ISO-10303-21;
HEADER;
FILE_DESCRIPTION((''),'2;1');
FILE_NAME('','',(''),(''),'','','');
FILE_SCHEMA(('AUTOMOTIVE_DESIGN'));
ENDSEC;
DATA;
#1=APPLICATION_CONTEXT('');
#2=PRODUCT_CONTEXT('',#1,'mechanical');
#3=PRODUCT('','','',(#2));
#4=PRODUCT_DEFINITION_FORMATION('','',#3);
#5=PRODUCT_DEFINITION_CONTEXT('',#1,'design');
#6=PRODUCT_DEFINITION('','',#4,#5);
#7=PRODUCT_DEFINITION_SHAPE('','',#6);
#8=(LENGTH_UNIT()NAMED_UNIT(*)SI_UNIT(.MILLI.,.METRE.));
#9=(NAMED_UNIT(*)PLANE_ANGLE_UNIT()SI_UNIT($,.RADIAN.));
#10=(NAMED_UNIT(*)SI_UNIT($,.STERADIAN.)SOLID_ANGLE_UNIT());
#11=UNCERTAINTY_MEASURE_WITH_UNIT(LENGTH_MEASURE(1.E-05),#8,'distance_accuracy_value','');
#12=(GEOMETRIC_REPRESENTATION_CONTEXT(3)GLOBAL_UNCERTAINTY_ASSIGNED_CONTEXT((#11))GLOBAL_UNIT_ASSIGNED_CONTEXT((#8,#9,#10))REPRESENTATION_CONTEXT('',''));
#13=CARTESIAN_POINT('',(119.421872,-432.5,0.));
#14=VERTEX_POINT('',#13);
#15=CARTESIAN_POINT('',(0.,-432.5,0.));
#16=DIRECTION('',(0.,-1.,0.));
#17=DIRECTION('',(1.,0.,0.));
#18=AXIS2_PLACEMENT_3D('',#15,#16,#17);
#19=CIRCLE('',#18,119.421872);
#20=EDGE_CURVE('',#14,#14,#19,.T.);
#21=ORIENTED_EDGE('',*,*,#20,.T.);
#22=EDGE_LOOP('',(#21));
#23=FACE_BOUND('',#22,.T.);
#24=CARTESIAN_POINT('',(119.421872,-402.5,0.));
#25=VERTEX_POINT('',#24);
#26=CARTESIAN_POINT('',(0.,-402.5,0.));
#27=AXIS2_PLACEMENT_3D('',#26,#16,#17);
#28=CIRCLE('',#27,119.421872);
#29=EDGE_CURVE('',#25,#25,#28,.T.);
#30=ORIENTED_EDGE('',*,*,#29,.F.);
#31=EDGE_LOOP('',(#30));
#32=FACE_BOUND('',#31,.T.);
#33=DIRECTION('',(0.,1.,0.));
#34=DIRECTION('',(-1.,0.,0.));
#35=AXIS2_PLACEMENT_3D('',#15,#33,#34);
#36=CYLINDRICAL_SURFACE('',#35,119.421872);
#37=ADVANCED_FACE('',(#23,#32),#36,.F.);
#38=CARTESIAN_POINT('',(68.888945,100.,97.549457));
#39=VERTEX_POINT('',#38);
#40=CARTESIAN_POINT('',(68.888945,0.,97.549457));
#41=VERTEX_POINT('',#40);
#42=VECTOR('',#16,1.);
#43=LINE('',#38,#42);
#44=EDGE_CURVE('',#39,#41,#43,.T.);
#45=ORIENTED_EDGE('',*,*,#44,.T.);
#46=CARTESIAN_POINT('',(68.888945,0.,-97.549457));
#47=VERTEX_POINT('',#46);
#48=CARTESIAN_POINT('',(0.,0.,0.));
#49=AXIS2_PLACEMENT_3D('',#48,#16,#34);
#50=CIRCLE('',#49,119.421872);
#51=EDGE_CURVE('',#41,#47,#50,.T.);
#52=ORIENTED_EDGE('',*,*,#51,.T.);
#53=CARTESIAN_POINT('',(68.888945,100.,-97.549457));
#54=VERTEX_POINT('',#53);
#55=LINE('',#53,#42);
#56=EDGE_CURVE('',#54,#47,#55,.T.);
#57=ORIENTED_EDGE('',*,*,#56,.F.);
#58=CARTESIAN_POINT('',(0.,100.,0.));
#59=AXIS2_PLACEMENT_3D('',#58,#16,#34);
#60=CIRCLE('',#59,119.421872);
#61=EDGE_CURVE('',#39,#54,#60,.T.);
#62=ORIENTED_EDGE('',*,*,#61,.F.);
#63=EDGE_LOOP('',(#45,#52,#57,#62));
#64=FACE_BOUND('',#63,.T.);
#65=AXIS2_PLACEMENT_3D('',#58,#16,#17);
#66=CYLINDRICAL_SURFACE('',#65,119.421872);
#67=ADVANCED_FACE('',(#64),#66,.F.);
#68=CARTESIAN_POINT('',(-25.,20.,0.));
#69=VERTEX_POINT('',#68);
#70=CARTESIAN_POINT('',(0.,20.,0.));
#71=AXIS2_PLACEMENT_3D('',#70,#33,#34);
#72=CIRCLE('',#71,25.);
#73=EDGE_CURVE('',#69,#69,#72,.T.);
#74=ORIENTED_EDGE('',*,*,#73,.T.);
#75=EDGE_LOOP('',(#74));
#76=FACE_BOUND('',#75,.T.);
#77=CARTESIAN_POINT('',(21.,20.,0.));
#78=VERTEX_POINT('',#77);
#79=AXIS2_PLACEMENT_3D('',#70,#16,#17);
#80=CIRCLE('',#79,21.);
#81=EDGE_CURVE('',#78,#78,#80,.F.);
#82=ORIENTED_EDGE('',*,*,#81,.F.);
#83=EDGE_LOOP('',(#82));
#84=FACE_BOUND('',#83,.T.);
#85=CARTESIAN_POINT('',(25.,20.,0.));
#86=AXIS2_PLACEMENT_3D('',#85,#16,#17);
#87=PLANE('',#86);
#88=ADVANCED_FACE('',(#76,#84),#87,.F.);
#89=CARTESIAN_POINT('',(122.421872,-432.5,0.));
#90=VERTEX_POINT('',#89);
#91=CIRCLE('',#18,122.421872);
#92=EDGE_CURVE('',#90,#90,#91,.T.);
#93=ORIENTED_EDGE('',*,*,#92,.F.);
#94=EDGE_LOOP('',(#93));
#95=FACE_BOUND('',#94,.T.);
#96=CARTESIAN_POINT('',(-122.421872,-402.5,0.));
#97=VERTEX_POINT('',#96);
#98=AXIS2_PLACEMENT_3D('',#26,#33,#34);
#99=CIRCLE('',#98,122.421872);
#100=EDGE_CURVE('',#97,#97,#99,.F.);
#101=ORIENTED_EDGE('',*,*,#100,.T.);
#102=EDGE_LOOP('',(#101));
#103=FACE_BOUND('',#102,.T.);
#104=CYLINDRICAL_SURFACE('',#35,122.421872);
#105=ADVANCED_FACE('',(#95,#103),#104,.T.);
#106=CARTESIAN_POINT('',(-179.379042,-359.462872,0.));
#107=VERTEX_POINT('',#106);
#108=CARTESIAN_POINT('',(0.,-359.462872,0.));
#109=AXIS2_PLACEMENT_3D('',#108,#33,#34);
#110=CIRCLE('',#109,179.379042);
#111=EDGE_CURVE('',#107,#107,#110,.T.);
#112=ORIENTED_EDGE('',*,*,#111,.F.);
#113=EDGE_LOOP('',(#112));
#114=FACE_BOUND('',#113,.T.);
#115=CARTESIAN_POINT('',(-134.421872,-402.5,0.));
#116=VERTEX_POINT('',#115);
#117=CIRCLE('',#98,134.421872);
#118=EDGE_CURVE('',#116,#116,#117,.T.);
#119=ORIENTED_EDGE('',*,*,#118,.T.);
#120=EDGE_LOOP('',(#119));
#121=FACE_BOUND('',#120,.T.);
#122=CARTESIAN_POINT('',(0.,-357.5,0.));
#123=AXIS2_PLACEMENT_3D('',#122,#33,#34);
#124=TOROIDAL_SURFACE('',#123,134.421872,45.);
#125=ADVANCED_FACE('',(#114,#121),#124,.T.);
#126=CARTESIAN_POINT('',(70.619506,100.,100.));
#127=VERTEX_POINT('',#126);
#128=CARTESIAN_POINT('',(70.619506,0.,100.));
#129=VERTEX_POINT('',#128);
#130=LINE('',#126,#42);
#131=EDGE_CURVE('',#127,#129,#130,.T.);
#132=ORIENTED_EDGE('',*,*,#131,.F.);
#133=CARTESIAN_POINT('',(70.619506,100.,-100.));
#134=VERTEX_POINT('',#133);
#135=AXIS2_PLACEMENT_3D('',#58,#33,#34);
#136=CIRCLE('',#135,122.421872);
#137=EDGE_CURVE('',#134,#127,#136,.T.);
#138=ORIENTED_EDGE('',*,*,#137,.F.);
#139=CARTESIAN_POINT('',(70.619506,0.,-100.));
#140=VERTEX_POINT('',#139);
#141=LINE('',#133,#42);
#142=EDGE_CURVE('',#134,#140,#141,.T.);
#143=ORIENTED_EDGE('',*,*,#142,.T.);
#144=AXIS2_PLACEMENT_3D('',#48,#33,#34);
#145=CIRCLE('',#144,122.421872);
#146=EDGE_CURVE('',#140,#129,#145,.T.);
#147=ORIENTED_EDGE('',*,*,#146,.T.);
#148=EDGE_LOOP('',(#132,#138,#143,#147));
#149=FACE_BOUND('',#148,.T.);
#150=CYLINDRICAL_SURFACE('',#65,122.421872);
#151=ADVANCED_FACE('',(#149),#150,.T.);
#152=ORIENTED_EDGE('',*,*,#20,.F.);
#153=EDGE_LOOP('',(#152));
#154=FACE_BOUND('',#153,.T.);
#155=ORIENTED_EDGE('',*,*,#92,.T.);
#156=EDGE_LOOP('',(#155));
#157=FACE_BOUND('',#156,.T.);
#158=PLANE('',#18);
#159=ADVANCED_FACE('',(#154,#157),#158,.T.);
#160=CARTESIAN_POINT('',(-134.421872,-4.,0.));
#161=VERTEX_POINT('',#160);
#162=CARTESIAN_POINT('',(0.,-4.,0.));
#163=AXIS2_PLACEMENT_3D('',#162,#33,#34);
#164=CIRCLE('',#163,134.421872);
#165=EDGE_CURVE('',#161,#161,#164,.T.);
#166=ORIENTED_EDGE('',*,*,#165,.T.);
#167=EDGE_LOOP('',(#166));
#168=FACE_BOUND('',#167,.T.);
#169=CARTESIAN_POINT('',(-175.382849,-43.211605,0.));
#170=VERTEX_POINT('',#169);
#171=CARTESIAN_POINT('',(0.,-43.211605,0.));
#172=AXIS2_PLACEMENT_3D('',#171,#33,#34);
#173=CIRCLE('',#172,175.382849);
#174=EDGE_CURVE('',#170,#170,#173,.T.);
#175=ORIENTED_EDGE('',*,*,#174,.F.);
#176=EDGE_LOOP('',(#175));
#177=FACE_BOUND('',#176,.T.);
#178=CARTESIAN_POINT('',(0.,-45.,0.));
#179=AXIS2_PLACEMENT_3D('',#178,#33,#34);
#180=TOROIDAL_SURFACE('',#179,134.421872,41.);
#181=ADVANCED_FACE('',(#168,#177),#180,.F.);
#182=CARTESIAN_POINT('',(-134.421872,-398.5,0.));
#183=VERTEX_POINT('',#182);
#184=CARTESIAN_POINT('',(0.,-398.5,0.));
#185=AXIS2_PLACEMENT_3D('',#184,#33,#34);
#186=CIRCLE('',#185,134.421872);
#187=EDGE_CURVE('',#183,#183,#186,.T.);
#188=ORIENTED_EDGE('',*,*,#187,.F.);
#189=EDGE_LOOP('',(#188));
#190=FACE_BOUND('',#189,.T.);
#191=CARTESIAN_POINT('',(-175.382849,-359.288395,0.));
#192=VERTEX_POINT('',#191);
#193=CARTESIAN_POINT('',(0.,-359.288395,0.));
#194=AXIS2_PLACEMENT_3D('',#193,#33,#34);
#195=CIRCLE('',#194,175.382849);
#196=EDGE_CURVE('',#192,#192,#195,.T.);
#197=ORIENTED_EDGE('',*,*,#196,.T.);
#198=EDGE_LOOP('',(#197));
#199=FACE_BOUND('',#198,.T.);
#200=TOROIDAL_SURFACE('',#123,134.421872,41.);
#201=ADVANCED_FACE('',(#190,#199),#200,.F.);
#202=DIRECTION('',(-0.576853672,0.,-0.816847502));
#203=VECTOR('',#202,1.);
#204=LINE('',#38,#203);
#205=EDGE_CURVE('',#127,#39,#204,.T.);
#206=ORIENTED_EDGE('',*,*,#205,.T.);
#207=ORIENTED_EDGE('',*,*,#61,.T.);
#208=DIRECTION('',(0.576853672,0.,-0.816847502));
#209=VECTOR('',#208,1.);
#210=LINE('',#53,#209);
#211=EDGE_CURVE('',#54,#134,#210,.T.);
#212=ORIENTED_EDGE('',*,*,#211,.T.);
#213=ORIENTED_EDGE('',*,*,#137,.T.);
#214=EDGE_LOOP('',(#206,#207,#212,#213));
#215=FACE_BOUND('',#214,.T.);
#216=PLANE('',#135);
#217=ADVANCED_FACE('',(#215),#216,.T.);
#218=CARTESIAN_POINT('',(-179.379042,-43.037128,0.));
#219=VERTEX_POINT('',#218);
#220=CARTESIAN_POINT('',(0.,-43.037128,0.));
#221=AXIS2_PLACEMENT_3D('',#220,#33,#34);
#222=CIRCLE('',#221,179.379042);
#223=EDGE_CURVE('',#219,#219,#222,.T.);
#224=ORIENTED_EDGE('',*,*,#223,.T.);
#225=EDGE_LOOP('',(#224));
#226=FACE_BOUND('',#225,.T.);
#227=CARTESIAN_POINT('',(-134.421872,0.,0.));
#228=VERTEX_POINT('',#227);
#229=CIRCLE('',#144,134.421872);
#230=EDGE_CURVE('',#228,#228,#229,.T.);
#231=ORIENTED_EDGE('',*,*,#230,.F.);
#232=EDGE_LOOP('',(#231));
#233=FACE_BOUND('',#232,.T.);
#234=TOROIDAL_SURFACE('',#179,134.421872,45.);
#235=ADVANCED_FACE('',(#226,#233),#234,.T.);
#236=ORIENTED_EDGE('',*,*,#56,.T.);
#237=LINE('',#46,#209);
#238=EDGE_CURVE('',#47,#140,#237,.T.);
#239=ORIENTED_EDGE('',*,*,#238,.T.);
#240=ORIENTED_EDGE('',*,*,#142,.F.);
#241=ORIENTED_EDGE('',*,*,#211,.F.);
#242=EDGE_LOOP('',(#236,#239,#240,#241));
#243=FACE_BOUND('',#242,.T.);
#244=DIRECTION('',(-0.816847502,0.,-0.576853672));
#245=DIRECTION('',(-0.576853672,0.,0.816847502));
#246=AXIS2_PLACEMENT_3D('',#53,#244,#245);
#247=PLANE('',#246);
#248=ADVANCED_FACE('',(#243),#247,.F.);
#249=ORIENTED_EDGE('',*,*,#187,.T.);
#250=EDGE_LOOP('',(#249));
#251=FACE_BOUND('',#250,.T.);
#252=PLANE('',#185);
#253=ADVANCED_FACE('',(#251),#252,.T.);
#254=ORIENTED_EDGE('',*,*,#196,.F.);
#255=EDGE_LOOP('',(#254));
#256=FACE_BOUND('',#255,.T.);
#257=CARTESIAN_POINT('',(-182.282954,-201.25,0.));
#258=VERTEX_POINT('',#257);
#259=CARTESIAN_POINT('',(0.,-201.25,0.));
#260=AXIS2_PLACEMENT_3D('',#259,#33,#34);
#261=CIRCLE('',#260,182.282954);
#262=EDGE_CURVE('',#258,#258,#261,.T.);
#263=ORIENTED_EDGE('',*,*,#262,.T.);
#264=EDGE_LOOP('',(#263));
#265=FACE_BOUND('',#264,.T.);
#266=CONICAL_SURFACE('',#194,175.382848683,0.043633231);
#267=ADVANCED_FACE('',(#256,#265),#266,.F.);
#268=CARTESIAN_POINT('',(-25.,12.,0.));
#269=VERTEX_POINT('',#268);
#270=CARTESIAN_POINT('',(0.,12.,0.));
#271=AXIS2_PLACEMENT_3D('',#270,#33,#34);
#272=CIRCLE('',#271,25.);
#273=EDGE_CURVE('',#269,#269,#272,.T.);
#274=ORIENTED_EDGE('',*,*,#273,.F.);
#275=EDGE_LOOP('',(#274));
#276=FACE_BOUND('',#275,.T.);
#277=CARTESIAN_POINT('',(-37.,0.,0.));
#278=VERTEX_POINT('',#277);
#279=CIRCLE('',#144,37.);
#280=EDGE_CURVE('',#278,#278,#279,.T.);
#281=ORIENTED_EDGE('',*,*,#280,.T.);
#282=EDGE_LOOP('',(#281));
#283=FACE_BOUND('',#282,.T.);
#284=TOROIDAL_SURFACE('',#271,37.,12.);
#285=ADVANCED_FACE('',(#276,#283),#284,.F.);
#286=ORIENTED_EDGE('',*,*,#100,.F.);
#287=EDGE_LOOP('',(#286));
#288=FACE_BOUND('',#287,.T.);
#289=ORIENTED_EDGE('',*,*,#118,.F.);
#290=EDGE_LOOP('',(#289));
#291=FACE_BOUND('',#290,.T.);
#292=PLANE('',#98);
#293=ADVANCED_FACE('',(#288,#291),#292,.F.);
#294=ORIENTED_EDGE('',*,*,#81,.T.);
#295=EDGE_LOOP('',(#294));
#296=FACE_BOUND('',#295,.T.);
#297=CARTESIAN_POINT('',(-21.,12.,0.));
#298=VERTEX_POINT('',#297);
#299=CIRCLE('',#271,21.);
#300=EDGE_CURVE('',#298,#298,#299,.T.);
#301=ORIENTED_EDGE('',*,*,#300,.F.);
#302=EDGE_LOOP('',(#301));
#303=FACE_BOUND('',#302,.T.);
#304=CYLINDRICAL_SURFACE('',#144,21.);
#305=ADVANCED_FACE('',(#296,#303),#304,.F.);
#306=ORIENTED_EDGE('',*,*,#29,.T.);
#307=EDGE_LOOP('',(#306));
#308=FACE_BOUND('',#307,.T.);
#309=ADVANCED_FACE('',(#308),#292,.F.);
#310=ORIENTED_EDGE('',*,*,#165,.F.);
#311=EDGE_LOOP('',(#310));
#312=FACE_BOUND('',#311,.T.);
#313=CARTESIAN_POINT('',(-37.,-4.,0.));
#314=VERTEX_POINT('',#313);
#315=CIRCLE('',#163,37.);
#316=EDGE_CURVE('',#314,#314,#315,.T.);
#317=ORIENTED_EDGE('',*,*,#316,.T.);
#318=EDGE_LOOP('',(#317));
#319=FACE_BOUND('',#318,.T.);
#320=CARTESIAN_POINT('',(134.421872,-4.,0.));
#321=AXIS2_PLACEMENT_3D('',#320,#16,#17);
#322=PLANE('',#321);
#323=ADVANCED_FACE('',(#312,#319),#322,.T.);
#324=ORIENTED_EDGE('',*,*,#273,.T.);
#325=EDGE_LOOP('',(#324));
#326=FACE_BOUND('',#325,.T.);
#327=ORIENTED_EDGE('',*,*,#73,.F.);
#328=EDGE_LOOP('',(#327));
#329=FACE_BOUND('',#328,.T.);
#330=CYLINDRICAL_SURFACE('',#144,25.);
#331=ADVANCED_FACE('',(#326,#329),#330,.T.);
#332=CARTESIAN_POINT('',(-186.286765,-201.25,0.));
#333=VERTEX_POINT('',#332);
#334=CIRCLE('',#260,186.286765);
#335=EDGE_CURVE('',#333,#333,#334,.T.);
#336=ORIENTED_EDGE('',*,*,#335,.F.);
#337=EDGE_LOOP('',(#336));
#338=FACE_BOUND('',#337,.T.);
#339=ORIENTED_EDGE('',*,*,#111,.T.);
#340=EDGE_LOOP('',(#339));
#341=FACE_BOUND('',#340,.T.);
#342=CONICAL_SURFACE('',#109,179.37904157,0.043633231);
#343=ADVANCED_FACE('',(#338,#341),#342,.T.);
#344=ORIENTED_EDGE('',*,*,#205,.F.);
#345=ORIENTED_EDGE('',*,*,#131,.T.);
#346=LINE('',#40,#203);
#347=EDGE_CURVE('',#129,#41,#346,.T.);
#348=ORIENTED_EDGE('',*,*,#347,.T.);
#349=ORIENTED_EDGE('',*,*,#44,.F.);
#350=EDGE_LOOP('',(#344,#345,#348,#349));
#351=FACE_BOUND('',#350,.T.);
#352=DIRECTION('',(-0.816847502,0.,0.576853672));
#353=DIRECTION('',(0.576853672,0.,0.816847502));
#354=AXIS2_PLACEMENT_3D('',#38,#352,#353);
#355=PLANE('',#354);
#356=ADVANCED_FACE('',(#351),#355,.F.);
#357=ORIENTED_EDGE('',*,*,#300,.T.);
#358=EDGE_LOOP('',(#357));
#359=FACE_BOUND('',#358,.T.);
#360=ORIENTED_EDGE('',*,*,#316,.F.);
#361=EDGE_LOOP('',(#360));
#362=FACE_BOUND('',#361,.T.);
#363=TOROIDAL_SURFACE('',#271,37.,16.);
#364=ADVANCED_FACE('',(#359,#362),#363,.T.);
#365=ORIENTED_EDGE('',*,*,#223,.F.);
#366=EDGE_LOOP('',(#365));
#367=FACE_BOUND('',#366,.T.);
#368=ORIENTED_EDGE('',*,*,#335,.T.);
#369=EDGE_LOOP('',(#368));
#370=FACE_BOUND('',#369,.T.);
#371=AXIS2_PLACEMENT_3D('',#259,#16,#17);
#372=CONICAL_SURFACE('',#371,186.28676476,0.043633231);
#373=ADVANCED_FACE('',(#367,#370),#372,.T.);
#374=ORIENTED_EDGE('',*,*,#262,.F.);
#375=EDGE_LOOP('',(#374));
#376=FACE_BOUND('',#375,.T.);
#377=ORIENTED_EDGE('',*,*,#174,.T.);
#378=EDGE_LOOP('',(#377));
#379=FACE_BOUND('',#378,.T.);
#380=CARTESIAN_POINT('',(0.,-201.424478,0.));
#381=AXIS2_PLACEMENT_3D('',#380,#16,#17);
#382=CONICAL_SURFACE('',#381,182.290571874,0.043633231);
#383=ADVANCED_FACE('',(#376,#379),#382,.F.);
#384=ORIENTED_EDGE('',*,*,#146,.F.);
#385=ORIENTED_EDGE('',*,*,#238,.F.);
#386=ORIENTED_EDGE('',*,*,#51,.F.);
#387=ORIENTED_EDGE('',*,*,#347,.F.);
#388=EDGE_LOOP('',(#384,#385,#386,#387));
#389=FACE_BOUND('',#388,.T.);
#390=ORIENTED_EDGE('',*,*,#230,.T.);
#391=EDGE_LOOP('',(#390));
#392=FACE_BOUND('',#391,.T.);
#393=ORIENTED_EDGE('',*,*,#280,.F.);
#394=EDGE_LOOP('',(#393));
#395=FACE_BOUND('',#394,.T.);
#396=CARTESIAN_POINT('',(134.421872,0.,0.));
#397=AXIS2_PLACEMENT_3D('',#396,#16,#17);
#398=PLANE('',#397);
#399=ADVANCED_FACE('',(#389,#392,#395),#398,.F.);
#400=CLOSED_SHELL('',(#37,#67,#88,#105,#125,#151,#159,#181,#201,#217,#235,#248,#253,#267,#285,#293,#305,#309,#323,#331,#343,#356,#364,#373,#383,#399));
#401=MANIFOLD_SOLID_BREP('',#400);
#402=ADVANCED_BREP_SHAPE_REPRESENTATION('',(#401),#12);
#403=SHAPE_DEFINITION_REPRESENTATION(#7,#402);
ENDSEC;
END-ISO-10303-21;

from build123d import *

# Parameters (mm, degrees)
BOSS_EXTRUDE1_DEPTH = 100
BOSS_EXTRUDE2_START = 30
SKETCH3_R           = 122.421871599
SKETCH3_R_2         = 119.421871599
BOSS_EXTRUDE2_DEPTH = 30


# Read off the part's stored shape, not the designer's step: Shell1
with BuildPart() as part:
    # Sketch1 → Revolve1 (revolve)
    with BuildSketch(Plane.XY, mode=Mode.PRIVATE) as revolve1_sk:
        with BuildLine():
            Line((0, 0), (0, -402.5))
            Line((0, -402.5), (134.421871599, -402.5))
            ThreePointArc((134.421871599, -402.5), (165.539959109, -390.006378293), (179.37904157, -359.462872431))
            Line((179.37904157, -359.462872431), (186.28676476, -201.25))
            Line((186.28676476, -201.25), (179.37904157, -43.037127569))
            ThreePointArc((179.37904157, -43.037127569), (165.539959109, -12.493621707), (134.421871599, 0))
            Line((134.421871599, 0), (37, 0))
            ThreePointArc((37, 0), (28.514718626, 3.514718626), (25, 12))
            Line((25, 12), (25, 20))
            Line((25, 20), (0, 20))
            Line((0, 20), (0, 0))
        make_face()
    revolve(revolve1_sk.sketch.rotate(Axis((0, 0, 0), (0, -1, 0)), 180), axis=Axis((0, 0, 0), (0, -1, 0)))

    # Shell1 outline → Shell1 (revolve, cut)
    with BuildSketch(Plane.XY):
        with BuildLine():
            Line((0, 20), (0, -398.5))
            Line((0, -398.5), (134.421871599, -398.5))
            ThreePointArc((134.421871599, -398.5), (162.773906886, -387.116922444), (175.382848683, -359.288394882))
            Line((175.382848683, -359.288394882), (182.28295402, -201.25))
            Line((182.28295402, -201.25), (175.382848683, -43.211605118))
            ThreePointArc((175.382848683, -43.211605118), (162.773906886, -15.383077556), (134.421871599, -4))
            Line((134.421871599, -4), (37, -4))
            ThreePointArc((37, -4), (25.686291501, 0.686291501), (21, 12))
            Line((21, 12), (21, 20))
            Line((21, 20), (0, 20))
        make_face()
    revolve(axis=Axis((0, 0, 0), (0, 1, 0)), mode=Mode.SUBTRACT)

    # Sketch2 → Boss-Extrude1 (add)
    with BuildSketch(Plane(origin=(0, 0, 0), x_dir=(1, 0, 0), z_dir=(0, 1, 0))):
        with BuildLine():
            Line((68.888945112, 97.549457494), (70.619506127, 100))
            ThreePointArc((70.619506127, 100), (-122.421871599, 0), (70.619506127, -100))
            Line((70.619506127, -100), (68.888945112, -97.549457494))
            ThreePointArc((68.888945112, -97.549457494), (-119.421871599, 0), (68.888945112, 97.549457494))
        make_face()
    extrude(amount=BOSS_EXTRUDE1_DEPTH)

    # Sketch3 → Boss-Extrude2 (add)
    with BuildSketch(Plane.XZ.offset(402.5).offset(BOSS_EXTRUDE2_START)):
        with Locations(Location((0, 0, 0), (0, 0, 180))):
            Circle(SKETCH3_R)
        Circle(SKETCH3_R_2, mode=Mode.SUBTRACT)
    extrude(amount=-BOSS_EXTRUDE2_DEPTH)


solid = part.part
